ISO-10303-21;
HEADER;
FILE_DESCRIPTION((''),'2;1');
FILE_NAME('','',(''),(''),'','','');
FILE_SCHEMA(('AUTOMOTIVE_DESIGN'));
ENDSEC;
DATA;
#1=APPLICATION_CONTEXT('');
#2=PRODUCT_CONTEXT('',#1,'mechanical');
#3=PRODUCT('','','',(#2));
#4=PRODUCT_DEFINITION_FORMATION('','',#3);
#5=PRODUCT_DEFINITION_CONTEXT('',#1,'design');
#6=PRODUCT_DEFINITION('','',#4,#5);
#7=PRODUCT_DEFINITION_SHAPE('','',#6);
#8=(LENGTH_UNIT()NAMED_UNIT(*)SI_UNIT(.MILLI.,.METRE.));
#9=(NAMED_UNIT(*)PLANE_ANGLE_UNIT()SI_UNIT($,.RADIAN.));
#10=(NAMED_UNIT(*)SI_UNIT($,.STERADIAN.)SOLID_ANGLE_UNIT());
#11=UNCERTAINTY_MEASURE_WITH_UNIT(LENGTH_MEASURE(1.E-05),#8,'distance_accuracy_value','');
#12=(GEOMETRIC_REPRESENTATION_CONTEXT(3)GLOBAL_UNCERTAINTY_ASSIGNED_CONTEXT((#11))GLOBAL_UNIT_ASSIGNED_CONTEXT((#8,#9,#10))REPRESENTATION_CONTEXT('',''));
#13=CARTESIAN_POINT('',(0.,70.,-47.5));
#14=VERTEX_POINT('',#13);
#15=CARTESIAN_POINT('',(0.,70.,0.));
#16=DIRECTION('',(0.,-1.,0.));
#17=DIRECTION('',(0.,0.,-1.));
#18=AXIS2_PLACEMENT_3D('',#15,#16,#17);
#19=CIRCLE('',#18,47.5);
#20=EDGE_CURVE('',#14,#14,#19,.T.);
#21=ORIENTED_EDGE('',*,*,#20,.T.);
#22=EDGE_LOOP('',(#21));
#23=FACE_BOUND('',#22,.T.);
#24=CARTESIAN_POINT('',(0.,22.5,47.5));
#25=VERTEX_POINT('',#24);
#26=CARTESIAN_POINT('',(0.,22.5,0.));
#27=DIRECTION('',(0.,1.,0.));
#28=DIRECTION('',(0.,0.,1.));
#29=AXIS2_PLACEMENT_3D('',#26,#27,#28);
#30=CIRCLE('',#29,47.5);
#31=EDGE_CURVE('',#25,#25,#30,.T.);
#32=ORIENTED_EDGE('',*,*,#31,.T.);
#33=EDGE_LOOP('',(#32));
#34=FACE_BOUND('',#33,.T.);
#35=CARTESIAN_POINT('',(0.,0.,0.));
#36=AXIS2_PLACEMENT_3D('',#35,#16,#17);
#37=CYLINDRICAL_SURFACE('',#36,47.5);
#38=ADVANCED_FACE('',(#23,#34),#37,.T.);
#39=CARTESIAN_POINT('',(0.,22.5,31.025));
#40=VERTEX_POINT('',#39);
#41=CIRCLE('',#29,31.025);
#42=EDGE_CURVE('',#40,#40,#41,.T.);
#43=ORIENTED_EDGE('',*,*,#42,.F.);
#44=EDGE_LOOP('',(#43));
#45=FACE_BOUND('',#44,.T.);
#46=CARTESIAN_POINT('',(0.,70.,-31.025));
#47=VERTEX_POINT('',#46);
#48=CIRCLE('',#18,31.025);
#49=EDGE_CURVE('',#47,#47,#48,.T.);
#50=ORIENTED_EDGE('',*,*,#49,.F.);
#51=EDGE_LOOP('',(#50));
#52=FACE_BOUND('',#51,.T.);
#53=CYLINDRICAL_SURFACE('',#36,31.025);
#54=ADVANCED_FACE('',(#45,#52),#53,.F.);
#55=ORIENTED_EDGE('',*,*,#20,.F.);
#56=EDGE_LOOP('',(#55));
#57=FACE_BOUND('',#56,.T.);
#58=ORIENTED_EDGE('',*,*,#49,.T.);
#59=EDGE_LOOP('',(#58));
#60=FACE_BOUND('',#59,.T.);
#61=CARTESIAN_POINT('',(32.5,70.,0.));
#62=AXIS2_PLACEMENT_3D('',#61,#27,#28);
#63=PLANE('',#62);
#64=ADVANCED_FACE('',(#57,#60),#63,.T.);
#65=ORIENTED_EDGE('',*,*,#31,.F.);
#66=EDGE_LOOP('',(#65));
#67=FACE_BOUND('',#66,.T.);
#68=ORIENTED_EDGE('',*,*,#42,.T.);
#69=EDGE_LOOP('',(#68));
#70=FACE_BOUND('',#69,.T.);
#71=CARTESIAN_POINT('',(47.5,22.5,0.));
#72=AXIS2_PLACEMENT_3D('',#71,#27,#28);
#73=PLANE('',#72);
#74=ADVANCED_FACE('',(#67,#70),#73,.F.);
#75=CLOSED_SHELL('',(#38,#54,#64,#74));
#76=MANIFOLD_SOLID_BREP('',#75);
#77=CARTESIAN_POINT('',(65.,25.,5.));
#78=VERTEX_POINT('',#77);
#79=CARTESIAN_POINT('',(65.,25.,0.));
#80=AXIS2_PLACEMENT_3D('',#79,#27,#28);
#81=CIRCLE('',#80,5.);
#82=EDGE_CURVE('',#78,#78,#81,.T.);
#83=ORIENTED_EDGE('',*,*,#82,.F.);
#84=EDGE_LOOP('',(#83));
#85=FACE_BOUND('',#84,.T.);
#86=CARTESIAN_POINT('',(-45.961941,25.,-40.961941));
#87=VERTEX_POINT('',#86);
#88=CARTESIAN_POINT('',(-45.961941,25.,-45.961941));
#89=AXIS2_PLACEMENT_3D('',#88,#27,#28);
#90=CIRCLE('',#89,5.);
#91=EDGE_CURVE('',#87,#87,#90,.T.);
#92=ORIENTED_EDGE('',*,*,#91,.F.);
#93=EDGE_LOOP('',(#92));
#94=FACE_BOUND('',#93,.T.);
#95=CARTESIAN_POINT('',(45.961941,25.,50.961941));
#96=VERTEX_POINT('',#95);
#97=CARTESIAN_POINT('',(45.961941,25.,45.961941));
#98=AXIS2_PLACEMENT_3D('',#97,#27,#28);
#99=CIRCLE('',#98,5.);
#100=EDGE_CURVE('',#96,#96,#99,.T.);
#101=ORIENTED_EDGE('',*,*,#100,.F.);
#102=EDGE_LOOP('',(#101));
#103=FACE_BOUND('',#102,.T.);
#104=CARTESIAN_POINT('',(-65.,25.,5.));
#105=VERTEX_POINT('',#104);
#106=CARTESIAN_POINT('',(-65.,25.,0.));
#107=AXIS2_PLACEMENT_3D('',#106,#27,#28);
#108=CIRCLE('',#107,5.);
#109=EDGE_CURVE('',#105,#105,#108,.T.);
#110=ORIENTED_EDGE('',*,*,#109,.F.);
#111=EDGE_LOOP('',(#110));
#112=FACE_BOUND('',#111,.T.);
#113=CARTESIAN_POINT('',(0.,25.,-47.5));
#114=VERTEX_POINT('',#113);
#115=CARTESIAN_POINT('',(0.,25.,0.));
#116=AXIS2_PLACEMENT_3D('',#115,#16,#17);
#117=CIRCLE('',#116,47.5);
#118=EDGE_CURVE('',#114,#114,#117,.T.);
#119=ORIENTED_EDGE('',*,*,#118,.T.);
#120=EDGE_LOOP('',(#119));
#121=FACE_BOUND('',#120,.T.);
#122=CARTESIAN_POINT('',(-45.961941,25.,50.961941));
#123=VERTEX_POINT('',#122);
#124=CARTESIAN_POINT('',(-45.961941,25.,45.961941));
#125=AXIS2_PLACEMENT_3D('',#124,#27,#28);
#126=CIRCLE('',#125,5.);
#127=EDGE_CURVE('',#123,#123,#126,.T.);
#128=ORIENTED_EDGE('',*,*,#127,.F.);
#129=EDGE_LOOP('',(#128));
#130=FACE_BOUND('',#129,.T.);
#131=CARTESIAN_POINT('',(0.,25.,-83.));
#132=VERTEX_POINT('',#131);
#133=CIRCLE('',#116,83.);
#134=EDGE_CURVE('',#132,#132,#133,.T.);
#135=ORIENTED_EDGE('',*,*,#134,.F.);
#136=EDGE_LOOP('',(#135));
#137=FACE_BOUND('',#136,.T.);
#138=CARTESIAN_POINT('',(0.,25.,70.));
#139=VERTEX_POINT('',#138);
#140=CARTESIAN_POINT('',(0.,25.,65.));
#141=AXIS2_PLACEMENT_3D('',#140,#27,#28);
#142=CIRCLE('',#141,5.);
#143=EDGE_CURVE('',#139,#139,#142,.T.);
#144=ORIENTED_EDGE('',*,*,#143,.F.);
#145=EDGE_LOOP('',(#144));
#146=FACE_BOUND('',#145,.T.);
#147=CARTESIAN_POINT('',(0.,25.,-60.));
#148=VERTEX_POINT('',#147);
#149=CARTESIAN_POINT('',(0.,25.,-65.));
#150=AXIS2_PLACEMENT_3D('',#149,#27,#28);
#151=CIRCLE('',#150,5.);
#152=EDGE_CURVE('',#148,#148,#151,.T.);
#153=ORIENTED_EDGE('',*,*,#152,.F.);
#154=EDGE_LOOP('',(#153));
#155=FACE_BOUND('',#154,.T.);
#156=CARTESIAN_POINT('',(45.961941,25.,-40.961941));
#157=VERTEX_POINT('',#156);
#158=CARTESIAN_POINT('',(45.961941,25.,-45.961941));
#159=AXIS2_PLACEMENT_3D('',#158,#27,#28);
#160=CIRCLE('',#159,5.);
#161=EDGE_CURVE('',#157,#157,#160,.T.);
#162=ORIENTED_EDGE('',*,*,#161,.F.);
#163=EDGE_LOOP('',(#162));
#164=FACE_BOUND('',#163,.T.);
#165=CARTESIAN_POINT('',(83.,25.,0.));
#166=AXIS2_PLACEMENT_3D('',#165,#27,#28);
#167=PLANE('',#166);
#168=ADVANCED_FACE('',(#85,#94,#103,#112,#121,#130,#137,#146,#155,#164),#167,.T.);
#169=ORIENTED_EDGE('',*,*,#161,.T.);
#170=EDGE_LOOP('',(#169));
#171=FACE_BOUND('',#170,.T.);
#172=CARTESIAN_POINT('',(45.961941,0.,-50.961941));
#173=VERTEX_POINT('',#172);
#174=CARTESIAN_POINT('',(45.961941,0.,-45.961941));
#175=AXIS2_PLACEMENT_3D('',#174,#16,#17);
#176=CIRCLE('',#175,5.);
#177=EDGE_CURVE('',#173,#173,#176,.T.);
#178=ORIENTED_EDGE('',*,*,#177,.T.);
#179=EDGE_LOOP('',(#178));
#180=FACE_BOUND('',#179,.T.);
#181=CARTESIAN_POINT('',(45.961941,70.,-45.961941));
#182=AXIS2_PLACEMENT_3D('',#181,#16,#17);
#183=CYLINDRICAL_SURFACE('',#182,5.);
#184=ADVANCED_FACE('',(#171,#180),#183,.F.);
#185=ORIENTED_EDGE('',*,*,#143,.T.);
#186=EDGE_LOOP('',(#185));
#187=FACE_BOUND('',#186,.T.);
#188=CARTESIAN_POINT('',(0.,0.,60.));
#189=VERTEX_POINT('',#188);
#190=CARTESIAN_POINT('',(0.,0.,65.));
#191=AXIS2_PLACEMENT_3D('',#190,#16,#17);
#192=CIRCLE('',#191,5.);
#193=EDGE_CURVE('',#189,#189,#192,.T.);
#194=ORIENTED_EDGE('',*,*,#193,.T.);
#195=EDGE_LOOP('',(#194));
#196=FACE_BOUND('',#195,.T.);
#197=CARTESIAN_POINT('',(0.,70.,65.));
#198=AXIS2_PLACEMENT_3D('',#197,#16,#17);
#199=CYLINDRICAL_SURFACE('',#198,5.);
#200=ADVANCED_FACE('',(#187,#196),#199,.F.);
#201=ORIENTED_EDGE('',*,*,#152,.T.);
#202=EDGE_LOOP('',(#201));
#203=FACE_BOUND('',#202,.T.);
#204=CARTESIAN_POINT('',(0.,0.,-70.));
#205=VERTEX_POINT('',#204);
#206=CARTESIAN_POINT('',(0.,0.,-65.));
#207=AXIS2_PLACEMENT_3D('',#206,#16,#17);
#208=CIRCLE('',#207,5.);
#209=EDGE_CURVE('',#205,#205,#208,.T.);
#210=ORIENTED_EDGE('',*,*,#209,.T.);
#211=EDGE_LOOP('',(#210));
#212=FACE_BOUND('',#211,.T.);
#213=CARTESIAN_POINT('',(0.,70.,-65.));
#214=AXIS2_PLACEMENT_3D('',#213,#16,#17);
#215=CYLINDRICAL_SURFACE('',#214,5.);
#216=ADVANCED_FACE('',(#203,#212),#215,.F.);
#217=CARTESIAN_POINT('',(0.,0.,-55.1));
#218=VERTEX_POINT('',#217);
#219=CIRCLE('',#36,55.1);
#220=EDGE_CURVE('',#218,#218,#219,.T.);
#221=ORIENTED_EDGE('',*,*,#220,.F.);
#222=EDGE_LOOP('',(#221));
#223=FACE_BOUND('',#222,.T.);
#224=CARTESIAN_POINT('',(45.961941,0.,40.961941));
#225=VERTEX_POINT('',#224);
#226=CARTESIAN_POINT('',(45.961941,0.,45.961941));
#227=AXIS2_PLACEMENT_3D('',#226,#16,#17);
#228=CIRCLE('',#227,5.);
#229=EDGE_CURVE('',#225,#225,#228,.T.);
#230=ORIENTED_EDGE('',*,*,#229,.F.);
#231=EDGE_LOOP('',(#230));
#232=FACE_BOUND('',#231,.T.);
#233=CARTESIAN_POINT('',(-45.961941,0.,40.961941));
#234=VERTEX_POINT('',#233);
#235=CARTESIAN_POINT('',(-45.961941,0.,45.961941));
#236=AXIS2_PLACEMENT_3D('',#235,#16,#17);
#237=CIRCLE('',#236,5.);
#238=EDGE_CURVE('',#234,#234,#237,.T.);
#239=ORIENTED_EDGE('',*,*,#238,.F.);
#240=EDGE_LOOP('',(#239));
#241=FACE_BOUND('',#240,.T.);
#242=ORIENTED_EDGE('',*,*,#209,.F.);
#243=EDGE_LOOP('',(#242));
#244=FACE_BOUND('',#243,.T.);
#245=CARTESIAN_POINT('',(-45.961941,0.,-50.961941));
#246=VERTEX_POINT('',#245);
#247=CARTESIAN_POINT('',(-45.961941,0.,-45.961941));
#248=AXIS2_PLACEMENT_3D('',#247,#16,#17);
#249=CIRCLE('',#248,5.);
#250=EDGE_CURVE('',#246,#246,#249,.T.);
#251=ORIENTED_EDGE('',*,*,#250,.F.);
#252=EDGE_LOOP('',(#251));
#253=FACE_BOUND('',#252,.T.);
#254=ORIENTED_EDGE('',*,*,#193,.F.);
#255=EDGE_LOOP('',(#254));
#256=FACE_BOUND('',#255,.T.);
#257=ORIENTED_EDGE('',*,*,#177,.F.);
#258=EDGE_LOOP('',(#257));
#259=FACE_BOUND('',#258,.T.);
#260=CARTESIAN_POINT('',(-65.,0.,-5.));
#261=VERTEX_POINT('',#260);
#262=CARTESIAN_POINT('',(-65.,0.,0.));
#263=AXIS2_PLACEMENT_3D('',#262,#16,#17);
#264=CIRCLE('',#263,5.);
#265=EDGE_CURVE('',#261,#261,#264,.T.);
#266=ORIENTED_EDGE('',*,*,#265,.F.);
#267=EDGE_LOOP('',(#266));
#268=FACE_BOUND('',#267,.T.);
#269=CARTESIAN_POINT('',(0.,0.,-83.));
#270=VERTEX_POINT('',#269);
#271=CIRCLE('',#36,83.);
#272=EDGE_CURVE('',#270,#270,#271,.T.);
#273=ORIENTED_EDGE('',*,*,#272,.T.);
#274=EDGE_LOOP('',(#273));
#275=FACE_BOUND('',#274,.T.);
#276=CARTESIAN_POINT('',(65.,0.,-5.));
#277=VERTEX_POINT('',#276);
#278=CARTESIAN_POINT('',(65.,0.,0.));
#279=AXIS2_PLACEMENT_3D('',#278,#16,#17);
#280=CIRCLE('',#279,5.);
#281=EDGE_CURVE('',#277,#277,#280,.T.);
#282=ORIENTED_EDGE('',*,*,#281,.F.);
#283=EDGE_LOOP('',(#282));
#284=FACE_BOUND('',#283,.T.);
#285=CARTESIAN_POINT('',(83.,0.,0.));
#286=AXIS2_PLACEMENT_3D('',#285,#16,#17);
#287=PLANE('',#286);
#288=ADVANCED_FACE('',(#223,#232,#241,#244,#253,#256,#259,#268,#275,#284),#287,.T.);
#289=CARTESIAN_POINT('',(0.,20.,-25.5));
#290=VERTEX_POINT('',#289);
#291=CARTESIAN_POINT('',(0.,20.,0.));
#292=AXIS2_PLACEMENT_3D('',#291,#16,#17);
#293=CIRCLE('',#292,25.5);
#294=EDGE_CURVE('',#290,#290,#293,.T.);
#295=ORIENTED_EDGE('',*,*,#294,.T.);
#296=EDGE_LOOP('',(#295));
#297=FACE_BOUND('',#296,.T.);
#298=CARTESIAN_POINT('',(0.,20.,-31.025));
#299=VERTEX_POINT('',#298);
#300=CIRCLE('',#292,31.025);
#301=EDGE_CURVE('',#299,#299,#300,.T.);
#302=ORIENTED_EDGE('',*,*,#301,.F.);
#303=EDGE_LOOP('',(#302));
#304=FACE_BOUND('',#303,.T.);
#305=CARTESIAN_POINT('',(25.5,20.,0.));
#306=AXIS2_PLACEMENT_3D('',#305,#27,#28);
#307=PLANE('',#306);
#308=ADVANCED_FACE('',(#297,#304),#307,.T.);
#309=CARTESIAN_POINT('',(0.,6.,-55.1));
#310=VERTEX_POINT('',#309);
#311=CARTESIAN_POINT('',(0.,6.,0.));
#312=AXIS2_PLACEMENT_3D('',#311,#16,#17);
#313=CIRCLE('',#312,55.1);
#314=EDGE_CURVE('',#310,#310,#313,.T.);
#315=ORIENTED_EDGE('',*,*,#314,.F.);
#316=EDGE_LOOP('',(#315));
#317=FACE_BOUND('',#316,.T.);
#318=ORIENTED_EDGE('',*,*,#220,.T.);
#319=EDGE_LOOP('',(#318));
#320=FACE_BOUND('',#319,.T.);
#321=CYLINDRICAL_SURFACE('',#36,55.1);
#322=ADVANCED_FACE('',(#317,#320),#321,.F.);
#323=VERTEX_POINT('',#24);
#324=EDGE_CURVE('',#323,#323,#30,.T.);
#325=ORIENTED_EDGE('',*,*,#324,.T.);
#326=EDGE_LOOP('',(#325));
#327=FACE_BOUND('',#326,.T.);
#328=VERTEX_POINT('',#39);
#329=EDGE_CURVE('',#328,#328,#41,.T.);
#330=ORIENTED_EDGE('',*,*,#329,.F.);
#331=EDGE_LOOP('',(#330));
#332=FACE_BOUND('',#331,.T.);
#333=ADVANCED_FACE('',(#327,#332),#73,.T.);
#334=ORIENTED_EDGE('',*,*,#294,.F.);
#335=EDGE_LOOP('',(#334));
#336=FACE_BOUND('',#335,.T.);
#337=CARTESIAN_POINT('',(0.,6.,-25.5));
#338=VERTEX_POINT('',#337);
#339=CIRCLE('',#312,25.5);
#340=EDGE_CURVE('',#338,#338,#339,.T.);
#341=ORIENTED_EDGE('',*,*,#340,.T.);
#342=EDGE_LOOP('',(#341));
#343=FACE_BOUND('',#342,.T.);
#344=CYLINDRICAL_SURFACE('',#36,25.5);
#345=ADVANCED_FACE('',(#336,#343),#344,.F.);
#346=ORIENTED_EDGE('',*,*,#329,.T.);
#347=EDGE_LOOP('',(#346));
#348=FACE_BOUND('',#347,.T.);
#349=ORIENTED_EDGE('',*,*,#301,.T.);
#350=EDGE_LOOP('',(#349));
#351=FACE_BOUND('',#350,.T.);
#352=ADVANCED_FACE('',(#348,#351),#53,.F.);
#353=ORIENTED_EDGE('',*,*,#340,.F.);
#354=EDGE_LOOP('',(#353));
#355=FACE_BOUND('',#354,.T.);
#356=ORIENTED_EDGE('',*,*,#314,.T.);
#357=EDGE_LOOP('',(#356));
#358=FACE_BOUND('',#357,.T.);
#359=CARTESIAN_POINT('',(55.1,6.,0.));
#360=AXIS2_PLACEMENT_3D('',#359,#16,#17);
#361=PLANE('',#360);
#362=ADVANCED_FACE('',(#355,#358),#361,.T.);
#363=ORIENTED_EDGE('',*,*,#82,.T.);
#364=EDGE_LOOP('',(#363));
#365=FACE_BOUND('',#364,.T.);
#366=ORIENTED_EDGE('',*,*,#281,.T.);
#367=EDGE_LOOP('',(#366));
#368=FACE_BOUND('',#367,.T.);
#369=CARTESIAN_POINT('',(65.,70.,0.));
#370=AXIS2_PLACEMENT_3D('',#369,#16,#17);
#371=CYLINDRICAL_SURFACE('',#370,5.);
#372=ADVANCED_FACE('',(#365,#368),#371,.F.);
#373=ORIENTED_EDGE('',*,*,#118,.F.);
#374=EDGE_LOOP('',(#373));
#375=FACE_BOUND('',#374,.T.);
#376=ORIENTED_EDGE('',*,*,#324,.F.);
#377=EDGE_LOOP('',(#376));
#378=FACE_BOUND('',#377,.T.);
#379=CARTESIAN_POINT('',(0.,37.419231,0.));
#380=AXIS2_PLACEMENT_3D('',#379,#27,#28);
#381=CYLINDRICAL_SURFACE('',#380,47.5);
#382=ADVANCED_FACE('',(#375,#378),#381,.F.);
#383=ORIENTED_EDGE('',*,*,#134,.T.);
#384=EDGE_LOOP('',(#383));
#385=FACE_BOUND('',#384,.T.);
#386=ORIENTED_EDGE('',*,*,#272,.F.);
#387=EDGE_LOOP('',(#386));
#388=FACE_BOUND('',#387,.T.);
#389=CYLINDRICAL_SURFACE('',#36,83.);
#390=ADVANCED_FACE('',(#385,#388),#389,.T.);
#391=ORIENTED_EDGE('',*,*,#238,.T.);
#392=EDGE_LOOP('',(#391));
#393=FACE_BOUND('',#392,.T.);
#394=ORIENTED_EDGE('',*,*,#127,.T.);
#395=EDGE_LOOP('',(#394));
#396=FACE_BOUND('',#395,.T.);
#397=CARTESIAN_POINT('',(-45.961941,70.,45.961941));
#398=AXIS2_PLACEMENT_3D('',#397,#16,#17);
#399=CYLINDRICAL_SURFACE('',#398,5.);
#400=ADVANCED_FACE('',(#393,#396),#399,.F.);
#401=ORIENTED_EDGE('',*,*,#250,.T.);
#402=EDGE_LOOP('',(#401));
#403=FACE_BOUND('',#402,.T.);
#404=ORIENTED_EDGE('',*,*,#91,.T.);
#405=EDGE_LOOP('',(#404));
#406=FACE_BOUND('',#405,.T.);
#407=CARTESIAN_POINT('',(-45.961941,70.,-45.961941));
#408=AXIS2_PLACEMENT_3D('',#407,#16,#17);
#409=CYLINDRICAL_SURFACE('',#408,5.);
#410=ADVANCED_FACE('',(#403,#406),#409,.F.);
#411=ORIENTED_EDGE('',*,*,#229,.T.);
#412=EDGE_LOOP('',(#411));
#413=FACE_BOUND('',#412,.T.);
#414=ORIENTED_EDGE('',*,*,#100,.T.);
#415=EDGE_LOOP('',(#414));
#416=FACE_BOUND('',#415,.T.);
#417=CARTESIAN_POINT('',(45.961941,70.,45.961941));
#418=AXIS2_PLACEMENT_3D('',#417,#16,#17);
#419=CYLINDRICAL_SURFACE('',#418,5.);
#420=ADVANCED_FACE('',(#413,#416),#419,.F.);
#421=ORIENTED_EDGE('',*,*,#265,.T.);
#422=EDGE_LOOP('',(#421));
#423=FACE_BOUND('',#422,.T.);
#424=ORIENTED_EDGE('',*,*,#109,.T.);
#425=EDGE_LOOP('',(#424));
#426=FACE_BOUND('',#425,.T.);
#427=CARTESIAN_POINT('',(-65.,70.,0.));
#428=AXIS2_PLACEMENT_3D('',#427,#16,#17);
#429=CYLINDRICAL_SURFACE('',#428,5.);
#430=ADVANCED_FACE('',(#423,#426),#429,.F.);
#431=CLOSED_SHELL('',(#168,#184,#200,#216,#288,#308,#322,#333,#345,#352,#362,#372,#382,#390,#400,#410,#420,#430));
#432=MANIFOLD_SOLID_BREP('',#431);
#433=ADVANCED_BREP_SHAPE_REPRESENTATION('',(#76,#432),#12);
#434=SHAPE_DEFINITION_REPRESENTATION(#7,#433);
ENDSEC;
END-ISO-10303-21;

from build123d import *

# Parameters (mm, degrees)
SKETCH3_R            = 5
CUT_EXTRUDE2_DEPTH   = 137.667479672
SPLIT1_START         = 22.5
SPLIT1_OUTLINE_R     = 47.5
SPLIT1_OUTLINE_R_2   = 31.025
SPLIT1_DEPTH         = 47.5
SPLIT1_2_OUTLINE_R   = 47.5
SPLIT1_2_OUTLINE_R_2 = 31.025
SPLIT1_2_DEPTH       = 47.5


# Read off the part's stored shape, not the designer's step: Split1
with BuildPart() as part:
    # Sketch2 → Revolve1 (revolve)
    with BuildSketch(Plane.XY, mode=Mode.PRIVATE) as revolve1_sk:
        Polygon((83, 0), (55.1, 0), (55.1, 6), (25.5, 6), (25.5, 20), (31.025, 20), (31.025, 36), (31.025, 70), (32.5, 70), (47.5, 70), (47.5, 25), (83, 25), align=None)
    revolve(revolve1_sk.sketch.rotate(Axis((0, 0, 0), (0, 1, 0)), 90), axis=Axis((0, 0, 0), (0, 1, 0)))

    # Sketch3 → Cut-Extrude2 (cut, through all)
    with BuildSketch(Plane.XZ):
        with Locations(Location((65, 0, 0), (0, 0, 270))):
            Circle(SKETCH3_R)
        with Locations(Location((45.961940777, -45.961940777, 0), (0, 0, 270))):
            Circle(SKETCH3_R)
        with Locations(Location((0, -65, 0), (0, 0, 270))):
            Circle(SKETCH3_R)
        with Locations(Location((-45.961940777, -45.961940777, 0), (0, 0, 270))):
            Circle(SKETCH3_R)
        with Locations(Location((-65, 0, 0), (0, 0, 270))):
            Circle(SKETCH3_R)
        with Locations(Location((-45.961940777, 45.961940777, 0), (0, 0, 270))):
            Circle(SKETCH3_R)
        with Locations(Location((0, 65, 0), (0, 0, 270))):
            Circle(SKETCH3_R)
        with Locations(Location((45.961940777, 45.961940777, 0), (0, 0, 270))):
            Circle(SKETCH3_R)
    extrude(amount=-CUT_EXTRUDE2_DEPTH, mode=Mode.SUBTRACT)

    # Split1 outline → Split1 (cut)
    with BuildSketch(Plane(origin=(0, 0, 0), x_dir=(1, 0, 0), z_dir=(0, 1, 0)).offset(SPLIT1_START)):
        Circle(SPLIT1_OUTLINE_R)
        Circle(SPLIT1_OUTLINE_R_2, mode=Mode.SUBTRACT)
    extrude(amount=SPLIT1_DEPTH, mode=Mode.SUBTRACT)


with BuildPart() as body_2:
    # Split1 2 outline → Split1 2 (new body)
    with BuildSketch(Plane(origin=(0, 0, 0), x_dir=(1, 0, 0), z_dir=(0, 1, 0)).offset(SPLIT1_START)):
        Circle(SPLIT1_2_OUTLINE_R)
        Circle(SPLIT1_2_OUTLINE_R_2, mode=Mode.SUBTRACT)
    extrude(amount=SPLIT1_2_DEPTH)


solid = Compound([part.part, body_2.part])
